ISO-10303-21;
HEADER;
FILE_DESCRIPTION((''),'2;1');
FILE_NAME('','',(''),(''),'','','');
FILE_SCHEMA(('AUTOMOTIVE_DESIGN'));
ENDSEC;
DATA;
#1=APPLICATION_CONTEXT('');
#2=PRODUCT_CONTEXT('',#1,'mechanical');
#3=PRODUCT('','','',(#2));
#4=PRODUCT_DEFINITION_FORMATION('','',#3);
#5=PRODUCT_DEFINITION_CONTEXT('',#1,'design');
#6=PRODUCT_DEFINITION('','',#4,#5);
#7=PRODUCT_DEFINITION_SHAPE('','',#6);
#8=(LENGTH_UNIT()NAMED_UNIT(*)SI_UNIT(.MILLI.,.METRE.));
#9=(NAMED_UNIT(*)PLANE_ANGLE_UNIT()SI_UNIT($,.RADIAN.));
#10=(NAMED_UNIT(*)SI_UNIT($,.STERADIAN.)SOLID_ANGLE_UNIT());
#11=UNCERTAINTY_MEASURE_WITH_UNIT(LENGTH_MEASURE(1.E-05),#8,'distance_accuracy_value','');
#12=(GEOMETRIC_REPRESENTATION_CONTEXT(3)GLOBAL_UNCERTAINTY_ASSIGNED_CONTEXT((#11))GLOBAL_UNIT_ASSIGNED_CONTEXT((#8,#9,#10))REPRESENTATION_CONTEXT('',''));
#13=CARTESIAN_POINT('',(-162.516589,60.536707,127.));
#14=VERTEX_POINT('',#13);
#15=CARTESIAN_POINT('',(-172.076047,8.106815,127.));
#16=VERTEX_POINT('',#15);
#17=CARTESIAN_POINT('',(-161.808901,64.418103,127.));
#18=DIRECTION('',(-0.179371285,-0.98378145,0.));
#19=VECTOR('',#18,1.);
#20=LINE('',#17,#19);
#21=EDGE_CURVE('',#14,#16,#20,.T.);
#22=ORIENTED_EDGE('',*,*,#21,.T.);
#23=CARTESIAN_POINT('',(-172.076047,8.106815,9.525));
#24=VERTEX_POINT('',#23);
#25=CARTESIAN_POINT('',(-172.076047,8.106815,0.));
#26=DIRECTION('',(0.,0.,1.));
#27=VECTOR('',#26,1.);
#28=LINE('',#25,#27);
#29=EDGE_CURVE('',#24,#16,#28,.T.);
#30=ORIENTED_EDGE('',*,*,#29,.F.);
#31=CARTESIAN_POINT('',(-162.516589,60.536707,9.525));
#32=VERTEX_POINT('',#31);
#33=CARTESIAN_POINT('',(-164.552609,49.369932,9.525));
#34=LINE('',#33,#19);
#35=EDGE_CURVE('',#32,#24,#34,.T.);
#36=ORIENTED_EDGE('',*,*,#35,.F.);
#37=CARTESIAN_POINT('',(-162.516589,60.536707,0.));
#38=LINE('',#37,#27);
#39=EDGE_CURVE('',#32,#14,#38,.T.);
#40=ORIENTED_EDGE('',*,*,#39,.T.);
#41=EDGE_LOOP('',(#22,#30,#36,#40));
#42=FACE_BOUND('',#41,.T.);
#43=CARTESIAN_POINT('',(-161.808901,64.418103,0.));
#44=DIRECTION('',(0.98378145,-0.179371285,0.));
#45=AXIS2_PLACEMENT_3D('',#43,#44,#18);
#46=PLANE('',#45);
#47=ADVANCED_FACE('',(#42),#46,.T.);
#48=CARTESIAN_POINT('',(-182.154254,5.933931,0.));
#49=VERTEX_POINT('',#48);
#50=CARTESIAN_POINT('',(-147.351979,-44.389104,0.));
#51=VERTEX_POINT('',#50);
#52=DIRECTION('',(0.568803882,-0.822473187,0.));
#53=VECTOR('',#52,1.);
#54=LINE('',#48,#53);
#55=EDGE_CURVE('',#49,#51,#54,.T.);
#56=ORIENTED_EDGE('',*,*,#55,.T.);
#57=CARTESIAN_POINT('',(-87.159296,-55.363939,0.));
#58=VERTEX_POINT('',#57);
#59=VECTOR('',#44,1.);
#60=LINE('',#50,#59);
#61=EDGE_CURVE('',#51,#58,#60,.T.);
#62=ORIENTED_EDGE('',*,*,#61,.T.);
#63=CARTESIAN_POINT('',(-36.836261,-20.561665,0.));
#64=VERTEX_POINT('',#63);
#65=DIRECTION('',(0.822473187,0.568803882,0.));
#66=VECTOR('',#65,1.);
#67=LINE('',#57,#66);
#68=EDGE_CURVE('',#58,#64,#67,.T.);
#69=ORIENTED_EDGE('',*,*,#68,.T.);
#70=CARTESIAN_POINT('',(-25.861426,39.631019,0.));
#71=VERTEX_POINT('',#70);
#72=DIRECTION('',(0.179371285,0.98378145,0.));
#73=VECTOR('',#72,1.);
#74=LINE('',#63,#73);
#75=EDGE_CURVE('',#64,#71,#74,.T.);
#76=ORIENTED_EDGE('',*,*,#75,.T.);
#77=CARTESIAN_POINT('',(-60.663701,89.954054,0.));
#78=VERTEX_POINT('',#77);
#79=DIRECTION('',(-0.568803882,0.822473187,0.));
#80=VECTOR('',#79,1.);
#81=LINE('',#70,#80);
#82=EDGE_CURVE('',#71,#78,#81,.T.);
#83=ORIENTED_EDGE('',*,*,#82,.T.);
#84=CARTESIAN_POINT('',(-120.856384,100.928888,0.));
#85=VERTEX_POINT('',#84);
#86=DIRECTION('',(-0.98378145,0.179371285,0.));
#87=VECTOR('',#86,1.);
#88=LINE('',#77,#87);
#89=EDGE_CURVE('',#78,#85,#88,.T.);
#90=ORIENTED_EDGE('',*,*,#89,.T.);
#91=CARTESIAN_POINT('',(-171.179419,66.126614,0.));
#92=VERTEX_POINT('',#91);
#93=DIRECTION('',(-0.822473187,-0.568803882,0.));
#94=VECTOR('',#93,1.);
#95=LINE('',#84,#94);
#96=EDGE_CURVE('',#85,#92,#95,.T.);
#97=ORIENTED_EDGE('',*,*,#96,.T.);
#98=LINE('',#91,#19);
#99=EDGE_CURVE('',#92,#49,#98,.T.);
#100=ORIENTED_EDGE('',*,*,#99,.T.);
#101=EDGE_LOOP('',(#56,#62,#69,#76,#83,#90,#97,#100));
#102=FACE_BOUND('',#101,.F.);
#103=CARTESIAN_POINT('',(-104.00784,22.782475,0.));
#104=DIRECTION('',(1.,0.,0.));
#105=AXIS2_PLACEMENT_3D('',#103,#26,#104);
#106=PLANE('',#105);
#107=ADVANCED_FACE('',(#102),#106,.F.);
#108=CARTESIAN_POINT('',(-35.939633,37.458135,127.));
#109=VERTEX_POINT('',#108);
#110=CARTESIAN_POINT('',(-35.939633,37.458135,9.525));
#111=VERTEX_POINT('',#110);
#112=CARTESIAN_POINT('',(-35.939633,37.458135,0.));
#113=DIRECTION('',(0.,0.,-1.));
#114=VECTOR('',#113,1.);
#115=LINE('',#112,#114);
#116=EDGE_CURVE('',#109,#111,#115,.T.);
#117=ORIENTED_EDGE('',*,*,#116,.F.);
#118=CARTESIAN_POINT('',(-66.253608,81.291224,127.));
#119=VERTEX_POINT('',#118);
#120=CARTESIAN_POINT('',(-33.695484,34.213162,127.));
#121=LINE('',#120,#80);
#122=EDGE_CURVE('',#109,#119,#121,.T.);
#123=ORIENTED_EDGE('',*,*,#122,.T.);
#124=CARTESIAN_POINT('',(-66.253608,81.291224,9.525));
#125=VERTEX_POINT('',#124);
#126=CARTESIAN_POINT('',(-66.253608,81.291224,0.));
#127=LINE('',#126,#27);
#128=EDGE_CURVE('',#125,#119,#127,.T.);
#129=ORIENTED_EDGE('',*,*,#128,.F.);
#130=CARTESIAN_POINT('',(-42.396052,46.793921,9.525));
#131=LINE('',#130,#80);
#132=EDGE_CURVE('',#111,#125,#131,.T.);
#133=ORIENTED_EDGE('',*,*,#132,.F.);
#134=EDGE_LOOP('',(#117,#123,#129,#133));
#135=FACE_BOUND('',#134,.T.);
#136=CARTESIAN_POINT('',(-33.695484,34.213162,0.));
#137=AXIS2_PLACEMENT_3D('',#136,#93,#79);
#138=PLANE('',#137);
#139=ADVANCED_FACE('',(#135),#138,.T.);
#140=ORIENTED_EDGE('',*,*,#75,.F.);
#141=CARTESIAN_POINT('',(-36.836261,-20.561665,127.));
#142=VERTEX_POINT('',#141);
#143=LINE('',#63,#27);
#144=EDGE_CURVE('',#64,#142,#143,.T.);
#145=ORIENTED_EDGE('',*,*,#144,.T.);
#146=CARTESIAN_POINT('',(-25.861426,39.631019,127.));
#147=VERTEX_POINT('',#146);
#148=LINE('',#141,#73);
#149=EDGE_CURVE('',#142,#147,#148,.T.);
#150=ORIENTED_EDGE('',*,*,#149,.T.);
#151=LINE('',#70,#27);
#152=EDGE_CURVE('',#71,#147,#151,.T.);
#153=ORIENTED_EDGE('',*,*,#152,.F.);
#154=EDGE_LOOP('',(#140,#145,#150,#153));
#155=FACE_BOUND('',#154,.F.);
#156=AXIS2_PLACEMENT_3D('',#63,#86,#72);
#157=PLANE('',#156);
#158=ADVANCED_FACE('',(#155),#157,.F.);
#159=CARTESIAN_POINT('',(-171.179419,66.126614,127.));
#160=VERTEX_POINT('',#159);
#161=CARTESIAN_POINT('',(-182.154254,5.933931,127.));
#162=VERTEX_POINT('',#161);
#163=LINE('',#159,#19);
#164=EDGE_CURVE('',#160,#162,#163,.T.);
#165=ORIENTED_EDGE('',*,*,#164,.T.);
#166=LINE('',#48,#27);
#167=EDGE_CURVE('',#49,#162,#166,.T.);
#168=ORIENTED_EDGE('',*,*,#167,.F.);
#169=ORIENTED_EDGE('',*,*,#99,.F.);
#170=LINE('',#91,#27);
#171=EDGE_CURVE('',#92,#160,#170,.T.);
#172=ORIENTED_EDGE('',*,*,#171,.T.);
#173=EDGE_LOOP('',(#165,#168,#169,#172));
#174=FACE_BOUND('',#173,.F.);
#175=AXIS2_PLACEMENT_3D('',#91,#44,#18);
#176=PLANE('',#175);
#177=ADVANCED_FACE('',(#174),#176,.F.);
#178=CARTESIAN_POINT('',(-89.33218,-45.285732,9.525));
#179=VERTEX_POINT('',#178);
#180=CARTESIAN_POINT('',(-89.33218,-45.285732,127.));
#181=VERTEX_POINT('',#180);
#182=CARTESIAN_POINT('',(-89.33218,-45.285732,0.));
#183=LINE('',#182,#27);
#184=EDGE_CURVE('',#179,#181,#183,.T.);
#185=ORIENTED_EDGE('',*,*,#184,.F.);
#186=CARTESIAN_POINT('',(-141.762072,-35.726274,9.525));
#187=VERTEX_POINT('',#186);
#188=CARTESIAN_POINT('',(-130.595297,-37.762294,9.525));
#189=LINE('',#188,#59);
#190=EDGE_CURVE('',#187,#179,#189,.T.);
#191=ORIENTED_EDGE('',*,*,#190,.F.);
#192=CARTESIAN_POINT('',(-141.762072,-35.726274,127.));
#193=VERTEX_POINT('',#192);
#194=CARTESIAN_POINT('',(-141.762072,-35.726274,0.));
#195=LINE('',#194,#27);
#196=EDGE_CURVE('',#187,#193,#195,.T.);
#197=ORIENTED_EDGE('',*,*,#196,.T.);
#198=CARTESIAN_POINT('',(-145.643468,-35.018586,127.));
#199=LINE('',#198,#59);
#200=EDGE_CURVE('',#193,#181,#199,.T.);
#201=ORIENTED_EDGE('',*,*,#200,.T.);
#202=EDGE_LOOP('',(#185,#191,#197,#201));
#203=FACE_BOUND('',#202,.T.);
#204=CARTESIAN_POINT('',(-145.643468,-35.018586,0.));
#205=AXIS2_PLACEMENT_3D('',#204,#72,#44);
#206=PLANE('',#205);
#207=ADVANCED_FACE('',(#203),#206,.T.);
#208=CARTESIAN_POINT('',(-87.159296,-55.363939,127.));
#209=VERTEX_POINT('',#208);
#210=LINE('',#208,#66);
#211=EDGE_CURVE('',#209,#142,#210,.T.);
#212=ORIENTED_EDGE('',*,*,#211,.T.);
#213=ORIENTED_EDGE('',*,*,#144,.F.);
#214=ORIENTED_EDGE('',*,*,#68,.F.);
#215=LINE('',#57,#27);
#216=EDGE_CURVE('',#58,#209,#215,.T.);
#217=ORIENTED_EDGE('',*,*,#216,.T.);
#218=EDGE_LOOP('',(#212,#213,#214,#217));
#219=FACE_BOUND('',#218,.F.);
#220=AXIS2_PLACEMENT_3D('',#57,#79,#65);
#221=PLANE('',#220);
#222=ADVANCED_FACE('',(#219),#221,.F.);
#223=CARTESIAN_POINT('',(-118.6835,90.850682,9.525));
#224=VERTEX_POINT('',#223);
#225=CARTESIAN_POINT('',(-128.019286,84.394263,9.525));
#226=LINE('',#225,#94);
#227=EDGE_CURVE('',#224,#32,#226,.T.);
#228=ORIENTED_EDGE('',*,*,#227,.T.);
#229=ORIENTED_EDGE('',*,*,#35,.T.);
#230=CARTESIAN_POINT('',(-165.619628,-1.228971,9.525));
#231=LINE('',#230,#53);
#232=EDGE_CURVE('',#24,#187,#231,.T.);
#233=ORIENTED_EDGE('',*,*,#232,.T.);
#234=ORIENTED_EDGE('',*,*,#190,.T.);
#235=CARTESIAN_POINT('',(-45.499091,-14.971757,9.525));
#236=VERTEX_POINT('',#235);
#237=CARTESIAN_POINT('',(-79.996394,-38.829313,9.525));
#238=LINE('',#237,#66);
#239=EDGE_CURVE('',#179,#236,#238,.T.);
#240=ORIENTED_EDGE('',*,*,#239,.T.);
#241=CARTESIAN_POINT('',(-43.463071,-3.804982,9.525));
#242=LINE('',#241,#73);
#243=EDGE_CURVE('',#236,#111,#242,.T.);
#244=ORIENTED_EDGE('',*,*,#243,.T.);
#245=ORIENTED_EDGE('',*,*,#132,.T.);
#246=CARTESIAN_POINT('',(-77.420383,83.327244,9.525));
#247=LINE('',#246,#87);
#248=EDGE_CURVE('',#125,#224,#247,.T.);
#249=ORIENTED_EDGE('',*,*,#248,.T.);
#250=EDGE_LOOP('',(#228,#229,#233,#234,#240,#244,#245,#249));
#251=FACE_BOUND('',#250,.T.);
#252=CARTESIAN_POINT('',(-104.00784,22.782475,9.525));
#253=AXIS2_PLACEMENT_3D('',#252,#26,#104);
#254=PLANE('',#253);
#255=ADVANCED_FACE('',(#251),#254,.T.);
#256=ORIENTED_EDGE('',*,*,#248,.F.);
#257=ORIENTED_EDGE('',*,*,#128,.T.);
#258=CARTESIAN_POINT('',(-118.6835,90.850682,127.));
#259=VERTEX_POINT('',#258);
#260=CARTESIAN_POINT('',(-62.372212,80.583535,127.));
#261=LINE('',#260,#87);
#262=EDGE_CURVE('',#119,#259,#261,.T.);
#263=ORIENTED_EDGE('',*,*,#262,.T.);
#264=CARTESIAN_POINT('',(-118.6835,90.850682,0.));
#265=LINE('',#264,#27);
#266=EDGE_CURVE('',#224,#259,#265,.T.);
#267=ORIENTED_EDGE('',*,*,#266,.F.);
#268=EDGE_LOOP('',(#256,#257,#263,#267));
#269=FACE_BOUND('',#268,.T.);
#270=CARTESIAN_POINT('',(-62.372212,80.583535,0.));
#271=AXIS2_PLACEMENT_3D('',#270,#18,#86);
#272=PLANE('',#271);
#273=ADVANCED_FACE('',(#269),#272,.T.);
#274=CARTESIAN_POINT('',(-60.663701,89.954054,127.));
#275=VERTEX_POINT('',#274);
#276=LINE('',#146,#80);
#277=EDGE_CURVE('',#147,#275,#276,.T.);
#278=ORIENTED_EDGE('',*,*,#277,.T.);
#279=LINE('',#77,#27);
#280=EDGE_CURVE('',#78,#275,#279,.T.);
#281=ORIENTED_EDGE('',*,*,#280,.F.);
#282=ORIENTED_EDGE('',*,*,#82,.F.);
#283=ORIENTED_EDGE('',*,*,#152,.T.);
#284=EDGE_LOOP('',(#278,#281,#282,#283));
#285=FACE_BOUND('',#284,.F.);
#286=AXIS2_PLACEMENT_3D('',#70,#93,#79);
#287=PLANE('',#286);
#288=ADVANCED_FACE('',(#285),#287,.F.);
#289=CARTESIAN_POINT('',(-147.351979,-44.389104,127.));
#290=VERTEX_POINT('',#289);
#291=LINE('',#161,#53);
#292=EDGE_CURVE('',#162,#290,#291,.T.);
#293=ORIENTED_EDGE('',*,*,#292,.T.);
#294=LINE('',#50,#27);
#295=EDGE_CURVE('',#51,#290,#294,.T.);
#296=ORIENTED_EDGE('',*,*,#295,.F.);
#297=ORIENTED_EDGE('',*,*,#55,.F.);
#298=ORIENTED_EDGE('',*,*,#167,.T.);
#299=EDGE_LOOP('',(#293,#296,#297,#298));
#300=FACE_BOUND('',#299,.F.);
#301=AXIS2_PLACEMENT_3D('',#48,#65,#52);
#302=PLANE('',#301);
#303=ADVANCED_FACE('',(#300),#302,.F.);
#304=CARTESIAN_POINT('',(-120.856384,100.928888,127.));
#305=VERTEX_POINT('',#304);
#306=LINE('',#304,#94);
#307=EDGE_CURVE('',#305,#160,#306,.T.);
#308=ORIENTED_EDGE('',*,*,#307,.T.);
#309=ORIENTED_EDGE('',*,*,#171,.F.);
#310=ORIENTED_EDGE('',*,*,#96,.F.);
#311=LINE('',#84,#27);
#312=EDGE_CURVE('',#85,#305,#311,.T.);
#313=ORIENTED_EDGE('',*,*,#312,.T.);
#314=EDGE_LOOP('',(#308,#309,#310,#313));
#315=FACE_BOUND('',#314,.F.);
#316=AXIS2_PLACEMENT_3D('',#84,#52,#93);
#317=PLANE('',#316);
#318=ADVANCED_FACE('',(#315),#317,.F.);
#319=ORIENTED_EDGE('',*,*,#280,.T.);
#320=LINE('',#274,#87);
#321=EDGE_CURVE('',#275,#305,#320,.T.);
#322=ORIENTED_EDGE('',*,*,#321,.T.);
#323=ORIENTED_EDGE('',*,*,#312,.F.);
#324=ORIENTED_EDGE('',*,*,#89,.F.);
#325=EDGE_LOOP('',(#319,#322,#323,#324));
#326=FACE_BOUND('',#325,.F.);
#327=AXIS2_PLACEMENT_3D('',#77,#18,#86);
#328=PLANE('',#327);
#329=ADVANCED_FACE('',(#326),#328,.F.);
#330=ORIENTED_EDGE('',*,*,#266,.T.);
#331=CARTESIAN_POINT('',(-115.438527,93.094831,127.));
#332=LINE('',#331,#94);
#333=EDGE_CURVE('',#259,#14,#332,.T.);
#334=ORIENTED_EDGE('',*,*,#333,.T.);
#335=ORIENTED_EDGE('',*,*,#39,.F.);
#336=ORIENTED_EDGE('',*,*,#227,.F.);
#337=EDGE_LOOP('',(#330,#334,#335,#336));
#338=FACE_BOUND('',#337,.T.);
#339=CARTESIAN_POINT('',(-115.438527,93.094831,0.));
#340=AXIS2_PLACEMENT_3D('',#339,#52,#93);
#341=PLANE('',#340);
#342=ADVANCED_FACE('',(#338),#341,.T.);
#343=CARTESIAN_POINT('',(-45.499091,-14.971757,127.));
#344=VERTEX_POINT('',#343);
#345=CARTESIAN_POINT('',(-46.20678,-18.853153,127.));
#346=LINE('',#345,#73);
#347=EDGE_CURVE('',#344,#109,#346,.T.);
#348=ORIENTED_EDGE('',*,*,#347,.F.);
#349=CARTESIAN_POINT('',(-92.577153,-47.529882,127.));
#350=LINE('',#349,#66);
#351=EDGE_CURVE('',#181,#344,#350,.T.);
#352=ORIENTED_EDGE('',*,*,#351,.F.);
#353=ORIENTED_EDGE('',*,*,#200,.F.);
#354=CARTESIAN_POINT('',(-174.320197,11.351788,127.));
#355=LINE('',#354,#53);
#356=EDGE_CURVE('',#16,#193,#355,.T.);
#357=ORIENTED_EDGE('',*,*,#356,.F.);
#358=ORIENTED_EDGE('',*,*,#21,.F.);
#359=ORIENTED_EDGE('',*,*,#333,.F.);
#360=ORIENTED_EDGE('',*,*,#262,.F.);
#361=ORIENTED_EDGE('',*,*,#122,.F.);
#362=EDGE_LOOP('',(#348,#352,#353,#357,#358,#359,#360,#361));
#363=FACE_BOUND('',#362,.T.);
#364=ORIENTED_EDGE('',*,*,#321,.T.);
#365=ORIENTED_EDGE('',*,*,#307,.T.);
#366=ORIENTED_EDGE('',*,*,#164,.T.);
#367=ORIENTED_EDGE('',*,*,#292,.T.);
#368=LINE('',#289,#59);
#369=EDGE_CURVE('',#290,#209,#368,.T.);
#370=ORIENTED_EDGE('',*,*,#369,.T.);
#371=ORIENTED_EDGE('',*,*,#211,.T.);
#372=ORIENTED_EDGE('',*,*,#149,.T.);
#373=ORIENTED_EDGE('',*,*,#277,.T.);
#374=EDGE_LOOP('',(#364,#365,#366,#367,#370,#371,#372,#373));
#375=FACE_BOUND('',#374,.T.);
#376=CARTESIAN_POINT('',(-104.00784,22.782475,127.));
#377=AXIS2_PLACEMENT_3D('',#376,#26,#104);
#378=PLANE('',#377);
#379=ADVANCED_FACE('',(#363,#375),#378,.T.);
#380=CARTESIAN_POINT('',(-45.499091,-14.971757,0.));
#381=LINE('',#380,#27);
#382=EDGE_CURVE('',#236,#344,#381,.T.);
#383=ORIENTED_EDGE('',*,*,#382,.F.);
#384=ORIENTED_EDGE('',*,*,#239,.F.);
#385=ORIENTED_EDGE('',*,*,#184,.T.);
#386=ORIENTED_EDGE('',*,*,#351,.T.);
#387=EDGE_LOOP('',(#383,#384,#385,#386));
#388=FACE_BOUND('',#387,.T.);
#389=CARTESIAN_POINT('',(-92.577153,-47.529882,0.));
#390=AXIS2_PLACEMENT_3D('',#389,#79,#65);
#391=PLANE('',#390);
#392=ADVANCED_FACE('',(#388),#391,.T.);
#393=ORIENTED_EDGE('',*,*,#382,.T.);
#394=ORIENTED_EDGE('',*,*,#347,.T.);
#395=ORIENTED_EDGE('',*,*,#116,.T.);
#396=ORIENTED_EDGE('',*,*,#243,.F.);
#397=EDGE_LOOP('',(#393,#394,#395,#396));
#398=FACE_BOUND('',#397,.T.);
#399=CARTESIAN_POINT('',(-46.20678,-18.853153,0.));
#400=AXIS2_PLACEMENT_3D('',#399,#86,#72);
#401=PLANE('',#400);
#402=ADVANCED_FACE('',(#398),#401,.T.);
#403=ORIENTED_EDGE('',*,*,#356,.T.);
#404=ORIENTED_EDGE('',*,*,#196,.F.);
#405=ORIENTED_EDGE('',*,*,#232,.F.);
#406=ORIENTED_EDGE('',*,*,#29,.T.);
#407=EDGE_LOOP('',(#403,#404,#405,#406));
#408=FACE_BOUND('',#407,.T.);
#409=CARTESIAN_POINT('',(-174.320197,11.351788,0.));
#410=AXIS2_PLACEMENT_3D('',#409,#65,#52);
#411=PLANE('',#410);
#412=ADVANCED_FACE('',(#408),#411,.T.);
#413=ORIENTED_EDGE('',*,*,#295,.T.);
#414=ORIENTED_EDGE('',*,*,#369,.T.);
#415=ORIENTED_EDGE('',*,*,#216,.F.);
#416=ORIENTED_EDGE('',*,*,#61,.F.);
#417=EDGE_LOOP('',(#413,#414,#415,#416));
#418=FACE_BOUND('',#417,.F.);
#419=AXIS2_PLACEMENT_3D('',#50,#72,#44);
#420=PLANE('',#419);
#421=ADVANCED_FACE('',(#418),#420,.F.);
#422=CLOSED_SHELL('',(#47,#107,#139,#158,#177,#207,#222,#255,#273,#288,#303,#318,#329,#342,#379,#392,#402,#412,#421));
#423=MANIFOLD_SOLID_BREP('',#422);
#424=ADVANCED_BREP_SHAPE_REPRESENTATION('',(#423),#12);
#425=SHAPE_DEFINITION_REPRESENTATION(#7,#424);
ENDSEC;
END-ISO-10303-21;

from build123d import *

# Parameters (mm, degrees)
F1_DEPTH = 127
F2_T     = -9.525


# Not quite as in the source:
# - a length typed as a fraction of an inch, garbled in the dataset ("3 / 203.2 mm" for 3/8 in), is restored


with BuildPart() as f1:
    # F0 (on Top) → F1 (new body)
    with BuildSketch(Plane.XY):
        Polygon((-25.8614264401, 39.6310188183), (-60.6637008516, 89.9540535799), (-120.8563842186, 100.9288884727), (-171.1794189802, 66.1266140612), (-182.154253873, 5.9339306942), (-147.3519794615, -44.3891040675), (-87.1592960945, -55.3639389602), (-36.8362613329, -20.5616645487), align=None)
    extrude(amount=F1_DEPTH)

    # F2
    f2_openings = [f1.faces().sort_by_distance(p)[0] for p in [
        (-104.00784, 22.782475, 127),
    ]]
    offset(amount=F2_T, openings=f2_openings)


solid = f1.part
